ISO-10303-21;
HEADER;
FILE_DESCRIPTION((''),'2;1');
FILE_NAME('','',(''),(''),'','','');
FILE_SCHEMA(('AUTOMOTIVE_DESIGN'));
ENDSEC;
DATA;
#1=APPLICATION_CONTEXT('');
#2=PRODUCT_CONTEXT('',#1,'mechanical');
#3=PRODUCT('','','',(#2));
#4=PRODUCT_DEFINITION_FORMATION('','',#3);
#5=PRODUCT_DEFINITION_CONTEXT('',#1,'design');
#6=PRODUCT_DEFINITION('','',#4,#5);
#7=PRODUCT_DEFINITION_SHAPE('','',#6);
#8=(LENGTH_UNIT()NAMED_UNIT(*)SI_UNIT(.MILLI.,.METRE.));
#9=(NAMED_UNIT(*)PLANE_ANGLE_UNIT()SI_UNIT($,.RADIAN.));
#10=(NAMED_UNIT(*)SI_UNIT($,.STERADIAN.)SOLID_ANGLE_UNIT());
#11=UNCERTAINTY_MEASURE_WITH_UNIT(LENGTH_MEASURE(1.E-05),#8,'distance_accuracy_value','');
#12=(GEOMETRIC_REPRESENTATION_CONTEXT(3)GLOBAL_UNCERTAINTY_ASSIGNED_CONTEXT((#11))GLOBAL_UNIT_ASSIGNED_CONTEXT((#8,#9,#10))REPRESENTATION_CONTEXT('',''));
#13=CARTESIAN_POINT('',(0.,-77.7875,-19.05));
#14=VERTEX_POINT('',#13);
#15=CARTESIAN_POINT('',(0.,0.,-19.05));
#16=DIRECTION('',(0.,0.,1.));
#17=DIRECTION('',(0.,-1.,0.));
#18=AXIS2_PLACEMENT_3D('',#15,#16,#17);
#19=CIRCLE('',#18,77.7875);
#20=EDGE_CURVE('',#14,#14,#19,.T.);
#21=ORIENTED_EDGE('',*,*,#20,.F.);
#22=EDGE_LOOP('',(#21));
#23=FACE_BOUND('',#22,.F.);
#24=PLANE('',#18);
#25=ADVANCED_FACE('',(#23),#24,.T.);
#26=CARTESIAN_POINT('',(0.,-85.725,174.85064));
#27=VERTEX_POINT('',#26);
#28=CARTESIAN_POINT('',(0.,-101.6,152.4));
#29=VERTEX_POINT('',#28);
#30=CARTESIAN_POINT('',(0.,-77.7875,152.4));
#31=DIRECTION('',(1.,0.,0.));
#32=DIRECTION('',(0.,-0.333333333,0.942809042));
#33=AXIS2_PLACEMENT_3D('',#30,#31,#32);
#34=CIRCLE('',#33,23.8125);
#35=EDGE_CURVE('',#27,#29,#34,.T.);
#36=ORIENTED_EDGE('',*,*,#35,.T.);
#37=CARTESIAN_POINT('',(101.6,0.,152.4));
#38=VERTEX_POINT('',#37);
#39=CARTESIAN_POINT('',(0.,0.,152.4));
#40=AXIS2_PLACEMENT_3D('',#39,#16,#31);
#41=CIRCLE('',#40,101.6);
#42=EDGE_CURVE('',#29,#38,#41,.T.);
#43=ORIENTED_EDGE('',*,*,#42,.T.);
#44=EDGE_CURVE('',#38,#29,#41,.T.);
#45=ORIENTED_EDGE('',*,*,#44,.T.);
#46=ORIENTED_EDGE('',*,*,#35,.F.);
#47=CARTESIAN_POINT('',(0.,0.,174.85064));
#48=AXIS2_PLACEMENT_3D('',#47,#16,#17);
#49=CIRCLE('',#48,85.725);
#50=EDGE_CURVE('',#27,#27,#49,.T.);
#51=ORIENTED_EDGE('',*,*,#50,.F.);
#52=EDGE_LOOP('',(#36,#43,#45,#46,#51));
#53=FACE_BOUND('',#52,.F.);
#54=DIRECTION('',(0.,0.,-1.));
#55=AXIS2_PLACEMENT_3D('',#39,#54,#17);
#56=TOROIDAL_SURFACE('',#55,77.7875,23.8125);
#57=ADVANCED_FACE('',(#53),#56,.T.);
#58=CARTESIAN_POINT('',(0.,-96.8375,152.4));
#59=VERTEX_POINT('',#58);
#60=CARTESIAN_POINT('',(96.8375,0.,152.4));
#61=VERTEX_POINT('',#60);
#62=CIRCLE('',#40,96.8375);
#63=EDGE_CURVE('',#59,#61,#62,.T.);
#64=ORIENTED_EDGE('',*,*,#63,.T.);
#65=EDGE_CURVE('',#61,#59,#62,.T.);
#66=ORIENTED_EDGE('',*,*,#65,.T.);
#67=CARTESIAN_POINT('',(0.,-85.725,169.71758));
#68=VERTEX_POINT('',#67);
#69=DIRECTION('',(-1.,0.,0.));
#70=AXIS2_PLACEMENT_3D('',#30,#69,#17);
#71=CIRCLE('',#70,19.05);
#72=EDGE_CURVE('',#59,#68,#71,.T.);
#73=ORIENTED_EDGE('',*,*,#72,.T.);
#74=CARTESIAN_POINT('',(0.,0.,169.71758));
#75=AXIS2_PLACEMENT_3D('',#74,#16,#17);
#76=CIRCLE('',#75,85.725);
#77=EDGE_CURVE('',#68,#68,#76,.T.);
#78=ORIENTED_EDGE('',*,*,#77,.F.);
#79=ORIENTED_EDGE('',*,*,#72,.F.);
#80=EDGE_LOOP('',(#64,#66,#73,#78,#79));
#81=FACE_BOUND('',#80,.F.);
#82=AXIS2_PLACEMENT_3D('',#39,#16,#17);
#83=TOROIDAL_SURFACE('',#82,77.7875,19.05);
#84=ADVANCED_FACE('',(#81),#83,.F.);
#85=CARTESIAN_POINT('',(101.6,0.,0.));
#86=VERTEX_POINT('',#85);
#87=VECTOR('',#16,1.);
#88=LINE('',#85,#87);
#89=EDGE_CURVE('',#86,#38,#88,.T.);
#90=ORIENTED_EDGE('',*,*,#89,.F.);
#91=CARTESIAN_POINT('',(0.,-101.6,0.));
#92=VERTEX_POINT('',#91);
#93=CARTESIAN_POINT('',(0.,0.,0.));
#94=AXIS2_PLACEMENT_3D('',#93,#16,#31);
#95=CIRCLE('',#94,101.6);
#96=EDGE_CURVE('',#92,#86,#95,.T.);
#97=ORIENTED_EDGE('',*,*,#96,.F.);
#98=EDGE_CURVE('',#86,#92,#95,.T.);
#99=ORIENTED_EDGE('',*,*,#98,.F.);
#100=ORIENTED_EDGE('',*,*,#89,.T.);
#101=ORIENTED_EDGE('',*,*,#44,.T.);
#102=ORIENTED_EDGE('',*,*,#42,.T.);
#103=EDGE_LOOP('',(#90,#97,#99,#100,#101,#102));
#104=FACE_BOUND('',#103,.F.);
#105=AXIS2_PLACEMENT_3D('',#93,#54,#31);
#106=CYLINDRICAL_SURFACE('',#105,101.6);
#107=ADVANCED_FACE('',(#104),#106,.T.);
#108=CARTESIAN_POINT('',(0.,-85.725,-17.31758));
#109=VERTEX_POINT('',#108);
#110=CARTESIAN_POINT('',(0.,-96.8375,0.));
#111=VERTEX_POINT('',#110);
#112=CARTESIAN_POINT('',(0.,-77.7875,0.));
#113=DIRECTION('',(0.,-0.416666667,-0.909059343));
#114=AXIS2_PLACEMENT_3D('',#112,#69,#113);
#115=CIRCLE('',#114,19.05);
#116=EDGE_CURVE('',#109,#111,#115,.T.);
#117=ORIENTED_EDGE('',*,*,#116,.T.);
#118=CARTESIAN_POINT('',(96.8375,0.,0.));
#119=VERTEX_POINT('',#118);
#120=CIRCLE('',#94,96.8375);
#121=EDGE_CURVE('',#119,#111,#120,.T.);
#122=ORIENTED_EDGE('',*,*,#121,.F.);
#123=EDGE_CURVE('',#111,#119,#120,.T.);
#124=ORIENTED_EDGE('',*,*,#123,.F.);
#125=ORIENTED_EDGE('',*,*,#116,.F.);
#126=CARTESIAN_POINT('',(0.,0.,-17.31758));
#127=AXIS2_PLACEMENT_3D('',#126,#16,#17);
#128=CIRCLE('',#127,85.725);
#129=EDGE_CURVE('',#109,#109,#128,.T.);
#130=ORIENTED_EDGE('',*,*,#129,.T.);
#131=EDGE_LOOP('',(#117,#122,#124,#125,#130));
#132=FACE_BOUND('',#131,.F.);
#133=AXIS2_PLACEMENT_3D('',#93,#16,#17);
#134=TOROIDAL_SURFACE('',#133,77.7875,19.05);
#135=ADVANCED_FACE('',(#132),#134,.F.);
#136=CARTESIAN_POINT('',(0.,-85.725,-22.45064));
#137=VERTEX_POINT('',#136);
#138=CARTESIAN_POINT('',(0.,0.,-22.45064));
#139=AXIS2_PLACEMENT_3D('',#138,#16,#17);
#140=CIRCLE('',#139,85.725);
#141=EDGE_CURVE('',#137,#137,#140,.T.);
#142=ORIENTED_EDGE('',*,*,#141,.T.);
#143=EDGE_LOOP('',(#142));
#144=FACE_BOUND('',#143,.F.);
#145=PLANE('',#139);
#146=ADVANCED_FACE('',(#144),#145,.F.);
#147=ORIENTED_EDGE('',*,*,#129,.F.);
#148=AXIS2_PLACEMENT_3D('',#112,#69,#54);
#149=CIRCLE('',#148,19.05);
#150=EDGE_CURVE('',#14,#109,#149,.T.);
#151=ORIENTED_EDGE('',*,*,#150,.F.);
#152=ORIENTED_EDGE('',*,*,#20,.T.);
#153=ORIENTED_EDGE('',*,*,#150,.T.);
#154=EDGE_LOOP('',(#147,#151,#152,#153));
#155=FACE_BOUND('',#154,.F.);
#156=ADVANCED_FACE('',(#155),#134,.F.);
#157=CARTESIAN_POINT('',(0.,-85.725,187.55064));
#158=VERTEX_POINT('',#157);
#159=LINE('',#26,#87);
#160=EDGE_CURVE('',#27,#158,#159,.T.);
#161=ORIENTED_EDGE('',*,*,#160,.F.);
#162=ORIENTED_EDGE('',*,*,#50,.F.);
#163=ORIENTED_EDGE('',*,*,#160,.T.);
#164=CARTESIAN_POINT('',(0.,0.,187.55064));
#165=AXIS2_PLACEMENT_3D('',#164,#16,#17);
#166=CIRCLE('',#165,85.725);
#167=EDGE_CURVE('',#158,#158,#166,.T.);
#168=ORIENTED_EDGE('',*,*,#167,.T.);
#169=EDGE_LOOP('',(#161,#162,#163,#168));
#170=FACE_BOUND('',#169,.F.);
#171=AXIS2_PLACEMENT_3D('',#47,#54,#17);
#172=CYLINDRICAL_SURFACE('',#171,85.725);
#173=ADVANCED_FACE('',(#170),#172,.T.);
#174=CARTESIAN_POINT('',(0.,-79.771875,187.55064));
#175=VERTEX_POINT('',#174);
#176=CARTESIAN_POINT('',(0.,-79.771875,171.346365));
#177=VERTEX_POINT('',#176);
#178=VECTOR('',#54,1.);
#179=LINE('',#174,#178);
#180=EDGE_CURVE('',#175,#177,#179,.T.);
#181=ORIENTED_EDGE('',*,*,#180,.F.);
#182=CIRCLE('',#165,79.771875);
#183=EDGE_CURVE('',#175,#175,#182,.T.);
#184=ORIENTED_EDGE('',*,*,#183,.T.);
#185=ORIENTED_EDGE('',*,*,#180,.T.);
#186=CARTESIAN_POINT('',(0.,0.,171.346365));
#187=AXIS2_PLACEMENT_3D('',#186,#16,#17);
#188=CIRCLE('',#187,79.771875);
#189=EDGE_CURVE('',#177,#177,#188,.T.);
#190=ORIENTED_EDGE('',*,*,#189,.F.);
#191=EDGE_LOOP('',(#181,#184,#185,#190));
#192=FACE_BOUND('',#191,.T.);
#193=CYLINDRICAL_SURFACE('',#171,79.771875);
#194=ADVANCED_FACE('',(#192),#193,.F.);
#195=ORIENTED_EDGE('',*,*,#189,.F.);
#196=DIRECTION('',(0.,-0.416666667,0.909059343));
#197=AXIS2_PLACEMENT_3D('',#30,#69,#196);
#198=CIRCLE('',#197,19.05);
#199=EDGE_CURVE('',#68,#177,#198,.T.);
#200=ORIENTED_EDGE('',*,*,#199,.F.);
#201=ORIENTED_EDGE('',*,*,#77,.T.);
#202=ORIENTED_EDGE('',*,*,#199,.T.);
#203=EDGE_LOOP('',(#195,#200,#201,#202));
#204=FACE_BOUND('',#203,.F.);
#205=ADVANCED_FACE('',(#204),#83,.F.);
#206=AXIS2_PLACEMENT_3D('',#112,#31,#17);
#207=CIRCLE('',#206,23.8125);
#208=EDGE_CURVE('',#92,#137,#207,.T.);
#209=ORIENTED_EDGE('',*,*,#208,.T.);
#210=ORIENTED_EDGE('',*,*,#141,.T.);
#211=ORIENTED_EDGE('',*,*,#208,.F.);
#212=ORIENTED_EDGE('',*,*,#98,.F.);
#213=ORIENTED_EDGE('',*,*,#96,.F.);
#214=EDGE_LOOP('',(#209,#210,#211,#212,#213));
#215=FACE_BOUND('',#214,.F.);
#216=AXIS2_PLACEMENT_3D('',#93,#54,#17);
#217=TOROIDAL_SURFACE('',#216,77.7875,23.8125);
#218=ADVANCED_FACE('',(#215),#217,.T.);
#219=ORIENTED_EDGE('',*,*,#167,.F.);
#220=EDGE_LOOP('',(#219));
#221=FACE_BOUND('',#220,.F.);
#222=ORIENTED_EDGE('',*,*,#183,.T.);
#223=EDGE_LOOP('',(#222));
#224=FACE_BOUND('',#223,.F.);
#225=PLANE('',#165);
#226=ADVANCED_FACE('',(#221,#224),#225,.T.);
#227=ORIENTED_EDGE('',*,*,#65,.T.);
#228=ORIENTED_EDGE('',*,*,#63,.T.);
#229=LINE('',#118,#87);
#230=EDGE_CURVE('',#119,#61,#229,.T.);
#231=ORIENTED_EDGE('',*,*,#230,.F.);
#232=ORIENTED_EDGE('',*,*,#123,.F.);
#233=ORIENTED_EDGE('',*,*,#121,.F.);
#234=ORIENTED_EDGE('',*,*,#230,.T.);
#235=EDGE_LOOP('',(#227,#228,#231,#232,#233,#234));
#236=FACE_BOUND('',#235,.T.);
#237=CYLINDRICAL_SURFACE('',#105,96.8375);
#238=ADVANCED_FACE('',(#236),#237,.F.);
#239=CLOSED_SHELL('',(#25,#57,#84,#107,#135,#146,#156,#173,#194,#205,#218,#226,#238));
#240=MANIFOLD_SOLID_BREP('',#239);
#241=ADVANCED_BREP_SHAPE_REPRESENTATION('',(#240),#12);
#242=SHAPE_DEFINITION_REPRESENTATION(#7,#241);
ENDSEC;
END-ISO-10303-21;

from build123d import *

# Parameters (mm, degrees)
F0_R     = 101.6
F0_R_2   = 96.8375
F1_DEPTH = 152.4
F4_DEPTH = 12.7


with BuildPart() as f1:
    # F0 (on Top) → F1 (new body)
    with BuildSketch(Plane.XY):
        Circle(F0_R)
        Circle(F0_R_2, mode=Mode.SUBTRACT)
    extrude(amount=F1_DEPTH)

    # F2 (on Right) → F3 (revolve)
    with BuildSketch(Plane.YZ):
        with BuildLine():
            Line((-101.6, 152.4), (-96.8375, 152.4))
            ThreePointArc((-96.8375, 152.4), (-93.8204640896, 162.6881758587), (-85.725, 169.717580482))
            ThreePointArc((-85.725, 169.717580482), (-82.8148388415, 170.774666369), (-79.771875, 171.3463652414))
            Line((-79.771875, 171.3463652414), (-79.771875, 174.8506403027))
            Line((-79.771875, 174.8506403027), (-81.75625, 174.8506403027))
            Line((-81.75625, 174.8506403027), (-85.725, 174.8506403027))
            ThreePointArc((-85.725, 174.8506403027), (-97.2303248333, 166.1481532851), (-101.6, 152.4))
        make_face()
    revolve(axis=Axis((0, 0, 76.2), (0, 0, 1)))

    # F4 (add): a face of the model
    f4_faces = [f1.faces().sort_by_distance(p)[0] for p in [
        (0, 82.1965441527, 174.8506403027),
    ]]
    extrude(f4_faces, amount=F4_DEPTH)

    # F5 (on Right) → F6 (revolve)
    with BuildSketch(Plane.YZ):
        with BuildLine():
            Line((0, -22.4506403027), (0, -19.05))
            Line((0, -19.05), (-77.7875, -19.05))
            ThreePointArc((-77.7875, -19.05), (-81.8496787146, -18.6118565461), (-85.725, -17.317580482))
            ThreePointArc((-85.725, -17.317580482), (-93.8204640896, -10.2881758587), (-96.8375, 0))
            Line((-96.8375, 0), (-101.6, 0))
            ThreePointArc((-101.6, 0), (-97.2303248333, -13.7481532851), (-85.725, -22.4506403027))
            Line((-85.725, -22.4506403027), (-77.7875, -22.4506403027))
            Line((-77.7875, -22.4506403027), (0, -22.4506403027))
        make_face()
    revolve(axis=Axis((0, 0, -11.2253201513), (0, 0, 1)))


solid = f1.part
